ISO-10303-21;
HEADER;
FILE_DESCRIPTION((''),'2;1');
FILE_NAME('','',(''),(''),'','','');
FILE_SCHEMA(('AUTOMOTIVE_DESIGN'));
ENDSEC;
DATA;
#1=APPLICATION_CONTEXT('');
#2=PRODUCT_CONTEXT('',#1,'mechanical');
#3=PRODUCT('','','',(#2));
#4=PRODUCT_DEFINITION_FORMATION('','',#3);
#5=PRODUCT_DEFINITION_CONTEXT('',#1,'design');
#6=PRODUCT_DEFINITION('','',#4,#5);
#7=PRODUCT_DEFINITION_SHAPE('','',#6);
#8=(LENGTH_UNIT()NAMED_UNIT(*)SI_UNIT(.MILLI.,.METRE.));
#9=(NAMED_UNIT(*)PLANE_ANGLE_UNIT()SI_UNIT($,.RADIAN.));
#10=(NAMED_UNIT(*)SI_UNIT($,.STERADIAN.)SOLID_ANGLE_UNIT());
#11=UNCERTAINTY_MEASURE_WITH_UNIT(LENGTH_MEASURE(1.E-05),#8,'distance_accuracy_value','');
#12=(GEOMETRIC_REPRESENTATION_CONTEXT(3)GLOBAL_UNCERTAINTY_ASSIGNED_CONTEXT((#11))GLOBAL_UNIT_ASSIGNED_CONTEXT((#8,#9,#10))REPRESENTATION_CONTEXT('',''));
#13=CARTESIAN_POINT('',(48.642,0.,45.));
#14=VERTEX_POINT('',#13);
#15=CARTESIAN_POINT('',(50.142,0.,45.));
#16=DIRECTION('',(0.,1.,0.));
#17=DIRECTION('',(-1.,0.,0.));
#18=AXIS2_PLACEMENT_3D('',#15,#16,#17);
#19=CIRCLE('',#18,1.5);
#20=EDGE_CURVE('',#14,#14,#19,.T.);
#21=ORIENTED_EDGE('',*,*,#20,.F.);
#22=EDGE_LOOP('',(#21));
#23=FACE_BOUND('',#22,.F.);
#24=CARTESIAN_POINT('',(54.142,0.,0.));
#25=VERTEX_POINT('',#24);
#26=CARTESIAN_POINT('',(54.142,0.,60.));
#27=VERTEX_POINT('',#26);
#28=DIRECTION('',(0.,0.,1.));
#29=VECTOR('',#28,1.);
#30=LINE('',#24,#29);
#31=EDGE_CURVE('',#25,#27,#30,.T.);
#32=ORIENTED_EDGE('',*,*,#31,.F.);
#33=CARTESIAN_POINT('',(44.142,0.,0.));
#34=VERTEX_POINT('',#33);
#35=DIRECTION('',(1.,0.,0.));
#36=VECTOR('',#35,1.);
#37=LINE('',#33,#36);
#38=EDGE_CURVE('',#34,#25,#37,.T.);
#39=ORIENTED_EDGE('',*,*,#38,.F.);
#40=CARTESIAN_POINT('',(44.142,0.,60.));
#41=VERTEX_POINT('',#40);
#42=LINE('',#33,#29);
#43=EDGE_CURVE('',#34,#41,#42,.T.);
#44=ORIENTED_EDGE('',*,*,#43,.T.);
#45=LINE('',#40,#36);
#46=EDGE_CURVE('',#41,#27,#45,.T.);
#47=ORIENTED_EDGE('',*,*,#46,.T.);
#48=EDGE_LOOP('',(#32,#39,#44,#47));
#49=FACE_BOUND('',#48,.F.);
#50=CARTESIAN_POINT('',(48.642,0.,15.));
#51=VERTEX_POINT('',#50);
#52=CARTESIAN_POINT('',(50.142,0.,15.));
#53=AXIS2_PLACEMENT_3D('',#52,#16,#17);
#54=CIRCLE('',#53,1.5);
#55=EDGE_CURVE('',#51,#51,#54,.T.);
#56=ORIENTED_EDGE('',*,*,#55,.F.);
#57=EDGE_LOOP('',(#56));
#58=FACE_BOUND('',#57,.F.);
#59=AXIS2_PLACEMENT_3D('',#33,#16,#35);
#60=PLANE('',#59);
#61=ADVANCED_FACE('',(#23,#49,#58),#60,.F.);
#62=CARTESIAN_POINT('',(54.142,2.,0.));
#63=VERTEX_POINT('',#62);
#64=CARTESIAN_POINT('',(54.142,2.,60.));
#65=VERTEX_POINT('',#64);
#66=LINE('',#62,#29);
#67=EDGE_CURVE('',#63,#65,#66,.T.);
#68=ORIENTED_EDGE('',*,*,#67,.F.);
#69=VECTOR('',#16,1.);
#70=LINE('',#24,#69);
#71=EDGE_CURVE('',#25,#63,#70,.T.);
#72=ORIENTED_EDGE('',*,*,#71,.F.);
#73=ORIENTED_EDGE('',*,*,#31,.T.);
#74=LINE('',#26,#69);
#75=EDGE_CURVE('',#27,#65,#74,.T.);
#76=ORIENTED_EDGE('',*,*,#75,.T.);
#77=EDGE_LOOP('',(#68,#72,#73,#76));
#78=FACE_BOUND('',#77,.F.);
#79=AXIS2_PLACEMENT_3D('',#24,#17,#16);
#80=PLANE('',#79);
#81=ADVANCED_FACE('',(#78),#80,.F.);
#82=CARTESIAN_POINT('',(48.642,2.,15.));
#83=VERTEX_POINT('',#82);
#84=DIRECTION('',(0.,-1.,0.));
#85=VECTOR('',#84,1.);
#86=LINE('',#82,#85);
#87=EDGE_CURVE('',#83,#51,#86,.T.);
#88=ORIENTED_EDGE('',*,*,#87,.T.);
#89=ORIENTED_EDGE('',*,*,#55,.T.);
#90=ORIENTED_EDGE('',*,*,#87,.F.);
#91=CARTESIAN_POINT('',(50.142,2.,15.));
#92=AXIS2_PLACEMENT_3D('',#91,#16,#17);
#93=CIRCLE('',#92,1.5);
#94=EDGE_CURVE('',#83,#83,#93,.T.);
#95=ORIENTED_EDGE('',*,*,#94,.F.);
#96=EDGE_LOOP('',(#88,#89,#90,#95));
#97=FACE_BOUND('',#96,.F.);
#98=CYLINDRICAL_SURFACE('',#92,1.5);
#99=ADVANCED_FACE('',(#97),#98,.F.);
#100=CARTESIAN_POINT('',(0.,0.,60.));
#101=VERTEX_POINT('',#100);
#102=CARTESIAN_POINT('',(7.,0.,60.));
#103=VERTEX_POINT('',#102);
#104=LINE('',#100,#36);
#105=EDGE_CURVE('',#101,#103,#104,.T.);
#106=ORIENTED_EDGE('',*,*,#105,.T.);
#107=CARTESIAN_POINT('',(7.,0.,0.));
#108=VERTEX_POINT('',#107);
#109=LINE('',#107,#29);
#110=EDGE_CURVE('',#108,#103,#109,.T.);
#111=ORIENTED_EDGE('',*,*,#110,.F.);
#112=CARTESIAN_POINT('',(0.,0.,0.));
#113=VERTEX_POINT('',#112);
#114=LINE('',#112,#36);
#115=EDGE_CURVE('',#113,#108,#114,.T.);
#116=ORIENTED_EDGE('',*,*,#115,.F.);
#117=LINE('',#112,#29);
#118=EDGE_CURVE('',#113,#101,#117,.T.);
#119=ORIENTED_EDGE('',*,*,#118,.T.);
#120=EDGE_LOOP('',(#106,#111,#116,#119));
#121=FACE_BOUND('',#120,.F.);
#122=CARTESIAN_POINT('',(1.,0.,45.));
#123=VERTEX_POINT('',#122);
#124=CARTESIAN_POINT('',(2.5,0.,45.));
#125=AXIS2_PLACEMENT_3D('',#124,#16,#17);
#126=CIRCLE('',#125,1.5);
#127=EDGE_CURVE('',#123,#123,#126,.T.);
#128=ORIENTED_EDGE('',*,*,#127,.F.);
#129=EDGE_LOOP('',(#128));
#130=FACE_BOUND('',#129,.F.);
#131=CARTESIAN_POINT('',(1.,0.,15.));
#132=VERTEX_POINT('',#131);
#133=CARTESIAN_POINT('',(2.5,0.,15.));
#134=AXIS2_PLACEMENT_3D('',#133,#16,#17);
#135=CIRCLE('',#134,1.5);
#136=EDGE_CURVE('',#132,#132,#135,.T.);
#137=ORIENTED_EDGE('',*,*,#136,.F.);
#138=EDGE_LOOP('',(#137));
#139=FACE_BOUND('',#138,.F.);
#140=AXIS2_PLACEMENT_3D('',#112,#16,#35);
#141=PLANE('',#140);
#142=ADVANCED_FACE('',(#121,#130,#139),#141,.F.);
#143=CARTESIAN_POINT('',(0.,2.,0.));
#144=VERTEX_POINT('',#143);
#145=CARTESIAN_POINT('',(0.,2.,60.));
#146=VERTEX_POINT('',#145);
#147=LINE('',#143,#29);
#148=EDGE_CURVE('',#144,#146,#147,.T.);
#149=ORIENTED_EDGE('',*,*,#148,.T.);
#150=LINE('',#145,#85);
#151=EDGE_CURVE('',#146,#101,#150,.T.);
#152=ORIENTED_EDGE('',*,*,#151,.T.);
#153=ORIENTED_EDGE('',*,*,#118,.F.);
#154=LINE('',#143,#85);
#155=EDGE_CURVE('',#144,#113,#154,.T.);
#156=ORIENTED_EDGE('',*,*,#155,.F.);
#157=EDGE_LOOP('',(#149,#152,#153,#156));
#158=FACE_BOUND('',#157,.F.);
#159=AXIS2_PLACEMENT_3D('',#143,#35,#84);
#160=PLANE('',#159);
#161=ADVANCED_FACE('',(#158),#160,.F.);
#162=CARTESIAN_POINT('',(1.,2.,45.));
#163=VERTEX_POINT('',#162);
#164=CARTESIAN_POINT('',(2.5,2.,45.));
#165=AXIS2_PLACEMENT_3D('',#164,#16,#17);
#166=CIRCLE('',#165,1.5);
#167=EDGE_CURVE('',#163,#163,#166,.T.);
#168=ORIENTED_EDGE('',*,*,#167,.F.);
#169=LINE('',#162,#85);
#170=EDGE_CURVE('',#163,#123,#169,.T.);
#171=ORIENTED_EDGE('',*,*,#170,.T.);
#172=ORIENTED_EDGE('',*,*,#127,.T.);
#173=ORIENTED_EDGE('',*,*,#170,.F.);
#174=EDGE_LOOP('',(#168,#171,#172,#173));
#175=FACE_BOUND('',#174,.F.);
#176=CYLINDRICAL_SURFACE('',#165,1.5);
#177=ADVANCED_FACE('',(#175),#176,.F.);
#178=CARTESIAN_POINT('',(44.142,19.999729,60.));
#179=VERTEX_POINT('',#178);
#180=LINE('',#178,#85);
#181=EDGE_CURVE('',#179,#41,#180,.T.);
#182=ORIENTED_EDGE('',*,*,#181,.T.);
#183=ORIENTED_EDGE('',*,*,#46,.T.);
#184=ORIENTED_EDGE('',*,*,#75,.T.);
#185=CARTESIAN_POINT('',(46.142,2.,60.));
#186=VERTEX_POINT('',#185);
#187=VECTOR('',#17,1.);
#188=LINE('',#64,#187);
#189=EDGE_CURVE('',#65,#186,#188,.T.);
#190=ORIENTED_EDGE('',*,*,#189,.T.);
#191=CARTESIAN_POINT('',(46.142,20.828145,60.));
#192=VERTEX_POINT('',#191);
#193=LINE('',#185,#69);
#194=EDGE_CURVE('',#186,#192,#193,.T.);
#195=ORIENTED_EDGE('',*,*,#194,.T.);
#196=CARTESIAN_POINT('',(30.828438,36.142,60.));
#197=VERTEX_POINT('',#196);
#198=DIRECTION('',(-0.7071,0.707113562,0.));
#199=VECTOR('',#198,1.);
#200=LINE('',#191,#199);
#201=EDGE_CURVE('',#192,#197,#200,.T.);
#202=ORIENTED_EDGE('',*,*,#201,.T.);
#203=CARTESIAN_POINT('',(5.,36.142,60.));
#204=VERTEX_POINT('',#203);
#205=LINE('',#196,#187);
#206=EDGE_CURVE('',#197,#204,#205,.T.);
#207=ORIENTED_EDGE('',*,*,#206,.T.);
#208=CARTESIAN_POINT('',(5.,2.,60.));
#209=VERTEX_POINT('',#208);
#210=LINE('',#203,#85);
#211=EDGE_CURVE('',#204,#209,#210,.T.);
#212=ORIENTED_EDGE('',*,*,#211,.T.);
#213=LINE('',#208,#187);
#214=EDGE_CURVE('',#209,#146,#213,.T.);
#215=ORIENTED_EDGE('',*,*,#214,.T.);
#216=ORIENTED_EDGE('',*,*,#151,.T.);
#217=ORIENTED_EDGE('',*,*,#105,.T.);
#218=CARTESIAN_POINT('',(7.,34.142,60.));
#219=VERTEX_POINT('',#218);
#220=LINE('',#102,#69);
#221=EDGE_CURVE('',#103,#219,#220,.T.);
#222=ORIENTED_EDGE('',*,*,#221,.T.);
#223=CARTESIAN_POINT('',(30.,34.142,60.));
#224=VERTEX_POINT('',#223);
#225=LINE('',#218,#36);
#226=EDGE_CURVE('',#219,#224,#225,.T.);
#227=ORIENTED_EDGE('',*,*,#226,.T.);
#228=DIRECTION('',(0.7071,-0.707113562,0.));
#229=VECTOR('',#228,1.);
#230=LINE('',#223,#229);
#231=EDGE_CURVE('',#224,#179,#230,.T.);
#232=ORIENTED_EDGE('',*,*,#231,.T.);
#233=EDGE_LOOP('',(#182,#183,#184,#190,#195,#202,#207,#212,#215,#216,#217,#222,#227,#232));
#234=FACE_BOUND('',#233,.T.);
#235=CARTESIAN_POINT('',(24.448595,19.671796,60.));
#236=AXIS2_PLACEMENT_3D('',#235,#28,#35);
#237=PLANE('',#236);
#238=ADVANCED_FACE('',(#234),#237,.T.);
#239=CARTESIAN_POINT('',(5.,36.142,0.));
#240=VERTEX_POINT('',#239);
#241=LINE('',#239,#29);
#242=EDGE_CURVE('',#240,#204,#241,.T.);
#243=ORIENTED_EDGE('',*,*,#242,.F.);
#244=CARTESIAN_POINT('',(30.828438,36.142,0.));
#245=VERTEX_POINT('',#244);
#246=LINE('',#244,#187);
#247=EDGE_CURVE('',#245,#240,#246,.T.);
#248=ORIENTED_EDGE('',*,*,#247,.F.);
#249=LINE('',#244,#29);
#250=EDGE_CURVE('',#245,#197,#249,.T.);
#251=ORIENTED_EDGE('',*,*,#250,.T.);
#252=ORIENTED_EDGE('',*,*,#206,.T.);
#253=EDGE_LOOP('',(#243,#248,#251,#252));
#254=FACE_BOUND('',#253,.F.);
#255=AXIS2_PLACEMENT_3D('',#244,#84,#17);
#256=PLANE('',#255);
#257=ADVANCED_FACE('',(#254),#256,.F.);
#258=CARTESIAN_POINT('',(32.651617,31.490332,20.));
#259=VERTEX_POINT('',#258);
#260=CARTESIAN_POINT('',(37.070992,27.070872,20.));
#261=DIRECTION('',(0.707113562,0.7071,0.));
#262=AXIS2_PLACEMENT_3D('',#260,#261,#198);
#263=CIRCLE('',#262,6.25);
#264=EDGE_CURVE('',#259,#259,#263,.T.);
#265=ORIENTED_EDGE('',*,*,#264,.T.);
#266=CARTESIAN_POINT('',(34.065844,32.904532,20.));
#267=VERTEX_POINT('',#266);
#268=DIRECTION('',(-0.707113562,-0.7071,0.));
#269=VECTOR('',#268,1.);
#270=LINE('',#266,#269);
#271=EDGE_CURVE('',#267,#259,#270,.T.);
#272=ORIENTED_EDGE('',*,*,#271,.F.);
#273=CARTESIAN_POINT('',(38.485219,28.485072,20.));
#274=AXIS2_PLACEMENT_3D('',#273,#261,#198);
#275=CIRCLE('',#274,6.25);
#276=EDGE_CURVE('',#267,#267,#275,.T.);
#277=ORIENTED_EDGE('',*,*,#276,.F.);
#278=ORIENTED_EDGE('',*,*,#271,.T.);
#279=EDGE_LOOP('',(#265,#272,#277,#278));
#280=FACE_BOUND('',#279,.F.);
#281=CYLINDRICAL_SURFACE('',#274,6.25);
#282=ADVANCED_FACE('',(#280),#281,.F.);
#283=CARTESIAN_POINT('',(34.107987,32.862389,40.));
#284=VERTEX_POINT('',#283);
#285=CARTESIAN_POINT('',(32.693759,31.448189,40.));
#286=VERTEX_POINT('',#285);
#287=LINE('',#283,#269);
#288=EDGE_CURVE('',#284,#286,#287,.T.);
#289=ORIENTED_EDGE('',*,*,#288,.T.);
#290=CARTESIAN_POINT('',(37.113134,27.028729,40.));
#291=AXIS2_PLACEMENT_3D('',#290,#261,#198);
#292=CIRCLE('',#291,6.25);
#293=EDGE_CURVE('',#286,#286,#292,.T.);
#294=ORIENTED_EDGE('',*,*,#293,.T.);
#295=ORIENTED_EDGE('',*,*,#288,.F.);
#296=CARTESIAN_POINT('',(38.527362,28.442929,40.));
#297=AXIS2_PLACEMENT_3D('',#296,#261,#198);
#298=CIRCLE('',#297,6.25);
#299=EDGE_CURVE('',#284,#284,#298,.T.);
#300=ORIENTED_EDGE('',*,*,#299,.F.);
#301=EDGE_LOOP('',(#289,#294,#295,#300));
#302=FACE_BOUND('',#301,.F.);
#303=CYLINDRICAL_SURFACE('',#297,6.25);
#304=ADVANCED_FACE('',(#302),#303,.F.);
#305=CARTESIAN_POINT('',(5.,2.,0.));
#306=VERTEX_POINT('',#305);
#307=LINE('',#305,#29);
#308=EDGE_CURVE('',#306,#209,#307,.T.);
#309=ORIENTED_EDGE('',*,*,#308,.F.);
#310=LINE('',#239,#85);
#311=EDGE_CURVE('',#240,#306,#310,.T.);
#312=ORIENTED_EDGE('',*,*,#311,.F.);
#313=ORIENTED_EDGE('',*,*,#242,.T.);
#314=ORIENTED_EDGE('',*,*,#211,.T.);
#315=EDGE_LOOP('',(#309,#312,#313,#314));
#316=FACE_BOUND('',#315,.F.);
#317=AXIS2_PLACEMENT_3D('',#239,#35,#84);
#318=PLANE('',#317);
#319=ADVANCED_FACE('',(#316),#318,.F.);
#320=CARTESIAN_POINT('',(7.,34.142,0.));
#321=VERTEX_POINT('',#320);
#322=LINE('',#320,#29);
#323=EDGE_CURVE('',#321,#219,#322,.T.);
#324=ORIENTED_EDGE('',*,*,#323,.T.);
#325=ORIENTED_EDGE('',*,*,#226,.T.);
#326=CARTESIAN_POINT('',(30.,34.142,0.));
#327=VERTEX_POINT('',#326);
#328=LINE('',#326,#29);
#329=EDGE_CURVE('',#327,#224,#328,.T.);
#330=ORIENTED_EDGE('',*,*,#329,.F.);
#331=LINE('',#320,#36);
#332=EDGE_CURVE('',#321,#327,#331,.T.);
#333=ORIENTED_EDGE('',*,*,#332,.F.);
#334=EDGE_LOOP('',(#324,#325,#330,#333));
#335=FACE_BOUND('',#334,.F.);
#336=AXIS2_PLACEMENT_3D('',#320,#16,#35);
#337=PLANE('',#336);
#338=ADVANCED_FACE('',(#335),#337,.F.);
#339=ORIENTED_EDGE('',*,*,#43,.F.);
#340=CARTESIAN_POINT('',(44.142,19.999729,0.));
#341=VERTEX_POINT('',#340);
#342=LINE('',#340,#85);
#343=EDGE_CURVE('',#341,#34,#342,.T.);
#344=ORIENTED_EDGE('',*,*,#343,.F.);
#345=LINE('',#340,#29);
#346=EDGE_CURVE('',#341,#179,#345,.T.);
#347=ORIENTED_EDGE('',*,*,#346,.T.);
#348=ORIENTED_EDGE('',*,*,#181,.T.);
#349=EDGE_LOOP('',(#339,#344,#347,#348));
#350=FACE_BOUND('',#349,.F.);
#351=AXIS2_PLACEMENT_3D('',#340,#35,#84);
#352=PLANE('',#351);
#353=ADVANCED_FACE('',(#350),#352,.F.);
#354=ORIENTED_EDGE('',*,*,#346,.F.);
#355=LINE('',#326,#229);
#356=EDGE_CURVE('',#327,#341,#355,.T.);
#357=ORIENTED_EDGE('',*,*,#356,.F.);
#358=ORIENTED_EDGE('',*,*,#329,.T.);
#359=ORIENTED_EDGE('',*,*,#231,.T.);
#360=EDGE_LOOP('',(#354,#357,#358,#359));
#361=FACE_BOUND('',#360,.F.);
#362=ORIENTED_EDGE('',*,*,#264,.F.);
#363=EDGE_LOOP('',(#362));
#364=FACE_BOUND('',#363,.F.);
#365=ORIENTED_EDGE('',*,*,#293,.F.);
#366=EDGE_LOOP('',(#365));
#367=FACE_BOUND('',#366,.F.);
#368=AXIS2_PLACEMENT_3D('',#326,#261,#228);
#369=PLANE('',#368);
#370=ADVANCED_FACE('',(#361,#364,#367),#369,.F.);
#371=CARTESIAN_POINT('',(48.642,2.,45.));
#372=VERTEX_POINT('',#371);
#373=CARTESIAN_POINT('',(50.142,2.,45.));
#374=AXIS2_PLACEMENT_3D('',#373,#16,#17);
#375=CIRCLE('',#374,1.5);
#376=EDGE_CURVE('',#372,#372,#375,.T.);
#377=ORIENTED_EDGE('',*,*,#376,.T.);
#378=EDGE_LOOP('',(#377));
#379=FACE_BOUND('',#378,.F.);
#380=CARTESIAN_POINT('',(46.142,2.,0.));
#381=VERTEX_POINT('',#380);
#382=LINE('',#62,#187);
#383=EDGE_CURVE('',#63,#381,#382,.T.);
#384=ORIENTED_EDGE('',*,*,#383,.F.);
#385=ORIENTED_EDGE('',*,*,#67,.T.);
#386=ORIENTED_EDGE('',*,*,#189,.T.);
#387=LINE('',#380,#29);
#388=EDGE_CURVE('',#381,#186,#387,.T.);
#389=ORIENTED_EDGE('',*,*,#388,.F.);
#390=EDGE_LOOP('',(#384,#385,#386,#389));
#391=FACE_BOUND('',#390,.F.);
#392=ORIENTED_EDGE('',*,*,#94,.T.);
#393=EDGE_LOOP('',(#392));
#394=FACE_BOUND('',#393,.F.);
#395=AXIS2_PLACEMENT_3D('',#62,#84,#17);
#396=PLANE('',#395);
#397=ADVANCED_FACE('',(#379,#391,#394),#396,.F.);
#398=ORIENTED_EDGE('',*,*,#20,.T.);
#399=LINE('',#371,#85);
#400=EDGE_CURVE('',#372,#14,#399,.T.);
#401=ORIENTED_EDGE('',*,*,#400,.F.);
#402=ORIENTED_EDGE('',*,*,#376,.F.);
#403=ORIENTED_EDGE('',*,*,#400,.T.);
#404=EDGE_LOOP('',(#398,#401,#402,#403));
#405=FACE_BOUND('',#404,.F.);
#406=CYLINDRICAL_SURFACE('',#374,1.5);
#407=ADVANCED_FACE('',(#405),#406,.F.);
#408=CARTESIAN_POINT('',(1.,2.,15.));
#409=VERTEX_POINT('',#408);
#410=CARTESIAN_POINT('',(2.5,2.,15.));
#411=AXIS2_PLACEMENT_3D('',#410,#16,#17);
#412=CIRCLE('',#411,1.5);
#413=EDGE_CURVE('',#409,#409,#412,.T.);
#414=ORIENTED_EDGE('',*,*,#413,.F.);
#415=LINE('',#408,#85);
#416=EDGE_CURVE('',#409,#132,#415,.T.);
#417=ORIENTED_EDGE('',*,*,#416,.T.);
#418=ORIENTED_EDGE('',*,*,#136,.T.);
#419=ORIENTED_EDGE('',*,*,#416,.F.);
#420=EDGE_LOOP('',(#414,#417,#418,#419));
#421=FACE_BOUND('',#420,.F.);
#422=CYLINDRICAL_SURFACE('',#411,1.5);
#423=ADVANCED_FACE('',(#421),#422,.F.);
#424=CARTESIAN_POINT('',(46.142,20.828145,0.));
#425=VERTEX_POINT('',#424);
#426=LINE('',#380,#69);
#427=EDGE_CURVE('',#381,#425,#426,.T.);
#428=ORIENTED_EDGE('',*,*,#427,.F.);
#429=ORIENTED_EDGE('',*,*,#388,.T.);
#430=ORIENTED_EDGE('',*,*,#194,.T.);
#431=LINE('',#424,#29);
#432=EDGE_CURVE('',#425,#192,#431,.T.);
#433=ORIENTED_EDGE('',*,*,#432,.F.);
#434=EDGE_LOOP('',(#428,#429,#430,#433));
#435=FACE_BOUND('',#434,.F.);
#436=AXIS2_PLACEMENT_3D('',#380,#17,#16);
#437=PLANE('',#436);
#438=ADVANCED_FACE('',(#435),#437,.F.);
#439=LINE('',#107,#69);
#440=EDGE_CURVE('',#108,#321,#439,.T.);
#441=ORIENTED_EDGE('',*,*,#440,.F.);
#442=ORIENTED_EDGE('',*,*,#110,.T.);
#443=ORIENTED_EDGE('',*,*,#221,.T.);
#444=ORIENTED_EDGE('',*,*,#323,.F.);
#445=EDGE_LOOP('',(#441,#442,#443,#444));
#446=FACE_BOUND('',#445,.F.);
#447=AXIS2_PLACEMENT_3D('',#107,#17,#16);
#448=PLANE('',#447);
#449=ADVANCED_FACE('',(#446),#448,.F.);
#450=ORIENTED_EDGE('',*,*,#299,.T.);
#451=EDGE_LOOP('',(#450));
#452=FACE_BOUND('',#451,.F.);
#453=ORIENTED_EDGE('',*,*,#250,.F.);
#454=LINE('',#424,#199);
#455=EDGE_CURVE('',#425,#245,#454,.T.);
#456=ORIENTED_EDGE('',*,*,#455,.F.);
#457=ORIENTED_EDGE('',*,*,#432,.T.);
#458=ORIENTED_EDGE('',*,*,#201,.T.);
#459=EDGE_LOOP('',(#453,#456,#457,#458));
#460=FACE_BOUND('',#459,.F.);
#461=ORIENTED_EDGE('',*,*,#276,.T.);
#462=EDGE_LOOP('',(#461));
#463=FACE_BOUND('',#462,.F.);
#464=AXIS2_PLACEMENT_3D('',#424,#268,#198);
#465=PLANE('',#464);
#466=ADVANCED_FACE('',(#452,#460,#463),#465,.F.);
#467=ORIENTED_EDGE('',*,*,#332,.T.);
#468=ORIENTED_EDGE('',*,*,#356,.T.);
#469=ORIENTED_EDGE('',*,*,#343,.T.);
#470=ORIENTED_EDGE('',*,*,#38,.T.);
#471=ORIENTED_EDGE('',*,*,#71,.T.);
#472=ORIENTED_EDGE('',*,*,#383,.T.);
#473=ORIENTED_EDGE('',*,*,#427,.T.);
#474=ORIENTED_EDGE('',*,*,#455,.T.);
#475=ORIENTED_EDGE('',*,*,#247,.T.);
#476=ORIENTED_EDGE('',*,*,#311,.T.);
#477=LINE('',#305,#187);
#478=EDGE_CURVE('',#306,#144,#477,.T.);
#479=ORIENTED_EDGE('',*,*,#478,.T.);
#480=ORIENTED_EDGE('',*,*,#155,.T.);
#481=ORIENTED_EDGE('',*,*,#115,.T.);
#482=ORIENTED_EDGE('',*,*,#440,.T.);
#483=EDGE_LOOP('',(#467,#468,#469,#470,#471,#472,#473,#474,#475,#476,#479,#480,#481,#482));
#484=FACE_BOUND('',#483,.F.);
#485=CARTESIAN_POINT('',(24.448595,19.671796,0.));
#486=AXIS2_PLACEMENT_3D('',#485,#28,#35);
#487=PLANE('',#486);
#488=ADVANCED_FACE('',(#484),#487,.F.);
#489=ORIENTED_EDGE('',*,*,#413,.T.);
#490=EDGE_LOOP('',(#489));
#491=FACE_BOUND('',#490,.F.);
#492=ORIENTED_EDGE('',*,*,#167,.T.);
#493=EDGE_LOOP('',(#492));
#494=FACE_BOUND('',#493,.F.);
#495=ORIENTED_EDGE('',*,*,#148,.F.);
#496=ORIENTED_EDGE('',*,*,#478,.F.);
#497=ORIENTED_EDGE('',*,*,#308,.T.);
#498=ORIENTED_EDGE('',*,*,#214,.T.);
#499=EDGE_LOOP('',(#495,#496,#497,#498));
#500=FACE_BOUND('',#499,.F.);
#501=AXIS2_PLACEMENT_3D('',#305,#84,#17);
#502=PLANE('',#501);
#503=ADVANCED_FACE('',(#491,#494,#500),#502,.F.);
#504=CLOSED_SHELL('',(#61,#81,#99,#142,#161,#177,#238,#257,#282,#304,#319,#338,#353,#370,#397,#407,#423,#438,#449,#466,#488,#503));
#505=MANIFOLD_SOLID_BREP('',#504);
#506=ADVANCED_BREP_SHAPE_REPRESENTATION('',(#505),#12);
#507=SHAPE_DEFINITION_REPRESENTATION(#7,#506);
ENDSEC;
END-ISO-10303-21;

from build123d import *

# Parameters (mm, degrees)
F1_DEPTH = 60
F2_R     = 6.25
F3_DEPTH = 2
F4_DEPTH = 2
F5_R     = 1.5
F6_DEPTH = 2
F7_R     = 1.5
F8_DEPTH = 2


with BuildPart() as f1:
    # F0 (on Top) → F1 (new body)
    with BuildSketch(Plane.XY):
        Polygon((0, 2), (0, 0), (7.0000001118, 0), (7.0000001118, 34.142), (30, 34.142), (44.142, 19.9997287538), (44.142, 0), (54.142, 0), (54.142, 2), (46.142, 2), (46.142, 20.8281446432), (30.8284383602, 36.142), (5.0000001118, 36.142), (5.0000001118, 2), align=None)
    extrude(amount=F1_DEPTH)

    # F2 (on face) → F3 (cut)
    with BuildSketch(Plane(origin=(33.4855148215, 33.4848725755, 0), x_dir=(-0.7071, 0.7071135623, 0), z_dir=(0.7071135623, 0.7071, 0))):
        with Locations((-7.1303164004, 40)):
            Circle(F2_R)
    extrude(amount=-F3_DEPTH, mode=Mode.SUBTRACT)

    # F2 (on face) → F4 (cut)
    with BuildSketch(Plane(origin=(33.4855148215, 33.4848725755, 0), x_dir=(-0.7071, 0.7071135623, 0), z_dir=(0.7071135623, 0.7071, 0))):
        with Locations((-7.0707175203, 20)):
            Circle(F2_R)
    extrude(amount=-F4_DEPTH, mode=Mode.SUBTRACT)

    # F5 (on face) → F6 (cut)
    with BuildSketch(Plane(origin=(0, 2, 0), x_dir=(-1, 0, 0), z_dir=(0, 1, 0))):
        with Locations((-50.142, 45)):
            Circle(F5_R)
        with Locations((-50.142, 15)):
            Circle(F5_R)
    extrude(amount=-F6_DEPTH, mode=Mode.SUBTRACT)

    # F7 (on face) → F8 (cut)
    with BuildSketch(Plane(origin=(0, 2, 0), x_dir=(-1, 0, 0), z_dir=(0, 1, 0))):
        with Locations((-2.5000000559, 15)):
            Circle(F7_R)
        with Locations((-2.5000000559, 45)):
            Circle(F7_R)
    extrude(amount=-F8_DEPTH, mode=Mode.SUBTRACT)


solid = f1.part
